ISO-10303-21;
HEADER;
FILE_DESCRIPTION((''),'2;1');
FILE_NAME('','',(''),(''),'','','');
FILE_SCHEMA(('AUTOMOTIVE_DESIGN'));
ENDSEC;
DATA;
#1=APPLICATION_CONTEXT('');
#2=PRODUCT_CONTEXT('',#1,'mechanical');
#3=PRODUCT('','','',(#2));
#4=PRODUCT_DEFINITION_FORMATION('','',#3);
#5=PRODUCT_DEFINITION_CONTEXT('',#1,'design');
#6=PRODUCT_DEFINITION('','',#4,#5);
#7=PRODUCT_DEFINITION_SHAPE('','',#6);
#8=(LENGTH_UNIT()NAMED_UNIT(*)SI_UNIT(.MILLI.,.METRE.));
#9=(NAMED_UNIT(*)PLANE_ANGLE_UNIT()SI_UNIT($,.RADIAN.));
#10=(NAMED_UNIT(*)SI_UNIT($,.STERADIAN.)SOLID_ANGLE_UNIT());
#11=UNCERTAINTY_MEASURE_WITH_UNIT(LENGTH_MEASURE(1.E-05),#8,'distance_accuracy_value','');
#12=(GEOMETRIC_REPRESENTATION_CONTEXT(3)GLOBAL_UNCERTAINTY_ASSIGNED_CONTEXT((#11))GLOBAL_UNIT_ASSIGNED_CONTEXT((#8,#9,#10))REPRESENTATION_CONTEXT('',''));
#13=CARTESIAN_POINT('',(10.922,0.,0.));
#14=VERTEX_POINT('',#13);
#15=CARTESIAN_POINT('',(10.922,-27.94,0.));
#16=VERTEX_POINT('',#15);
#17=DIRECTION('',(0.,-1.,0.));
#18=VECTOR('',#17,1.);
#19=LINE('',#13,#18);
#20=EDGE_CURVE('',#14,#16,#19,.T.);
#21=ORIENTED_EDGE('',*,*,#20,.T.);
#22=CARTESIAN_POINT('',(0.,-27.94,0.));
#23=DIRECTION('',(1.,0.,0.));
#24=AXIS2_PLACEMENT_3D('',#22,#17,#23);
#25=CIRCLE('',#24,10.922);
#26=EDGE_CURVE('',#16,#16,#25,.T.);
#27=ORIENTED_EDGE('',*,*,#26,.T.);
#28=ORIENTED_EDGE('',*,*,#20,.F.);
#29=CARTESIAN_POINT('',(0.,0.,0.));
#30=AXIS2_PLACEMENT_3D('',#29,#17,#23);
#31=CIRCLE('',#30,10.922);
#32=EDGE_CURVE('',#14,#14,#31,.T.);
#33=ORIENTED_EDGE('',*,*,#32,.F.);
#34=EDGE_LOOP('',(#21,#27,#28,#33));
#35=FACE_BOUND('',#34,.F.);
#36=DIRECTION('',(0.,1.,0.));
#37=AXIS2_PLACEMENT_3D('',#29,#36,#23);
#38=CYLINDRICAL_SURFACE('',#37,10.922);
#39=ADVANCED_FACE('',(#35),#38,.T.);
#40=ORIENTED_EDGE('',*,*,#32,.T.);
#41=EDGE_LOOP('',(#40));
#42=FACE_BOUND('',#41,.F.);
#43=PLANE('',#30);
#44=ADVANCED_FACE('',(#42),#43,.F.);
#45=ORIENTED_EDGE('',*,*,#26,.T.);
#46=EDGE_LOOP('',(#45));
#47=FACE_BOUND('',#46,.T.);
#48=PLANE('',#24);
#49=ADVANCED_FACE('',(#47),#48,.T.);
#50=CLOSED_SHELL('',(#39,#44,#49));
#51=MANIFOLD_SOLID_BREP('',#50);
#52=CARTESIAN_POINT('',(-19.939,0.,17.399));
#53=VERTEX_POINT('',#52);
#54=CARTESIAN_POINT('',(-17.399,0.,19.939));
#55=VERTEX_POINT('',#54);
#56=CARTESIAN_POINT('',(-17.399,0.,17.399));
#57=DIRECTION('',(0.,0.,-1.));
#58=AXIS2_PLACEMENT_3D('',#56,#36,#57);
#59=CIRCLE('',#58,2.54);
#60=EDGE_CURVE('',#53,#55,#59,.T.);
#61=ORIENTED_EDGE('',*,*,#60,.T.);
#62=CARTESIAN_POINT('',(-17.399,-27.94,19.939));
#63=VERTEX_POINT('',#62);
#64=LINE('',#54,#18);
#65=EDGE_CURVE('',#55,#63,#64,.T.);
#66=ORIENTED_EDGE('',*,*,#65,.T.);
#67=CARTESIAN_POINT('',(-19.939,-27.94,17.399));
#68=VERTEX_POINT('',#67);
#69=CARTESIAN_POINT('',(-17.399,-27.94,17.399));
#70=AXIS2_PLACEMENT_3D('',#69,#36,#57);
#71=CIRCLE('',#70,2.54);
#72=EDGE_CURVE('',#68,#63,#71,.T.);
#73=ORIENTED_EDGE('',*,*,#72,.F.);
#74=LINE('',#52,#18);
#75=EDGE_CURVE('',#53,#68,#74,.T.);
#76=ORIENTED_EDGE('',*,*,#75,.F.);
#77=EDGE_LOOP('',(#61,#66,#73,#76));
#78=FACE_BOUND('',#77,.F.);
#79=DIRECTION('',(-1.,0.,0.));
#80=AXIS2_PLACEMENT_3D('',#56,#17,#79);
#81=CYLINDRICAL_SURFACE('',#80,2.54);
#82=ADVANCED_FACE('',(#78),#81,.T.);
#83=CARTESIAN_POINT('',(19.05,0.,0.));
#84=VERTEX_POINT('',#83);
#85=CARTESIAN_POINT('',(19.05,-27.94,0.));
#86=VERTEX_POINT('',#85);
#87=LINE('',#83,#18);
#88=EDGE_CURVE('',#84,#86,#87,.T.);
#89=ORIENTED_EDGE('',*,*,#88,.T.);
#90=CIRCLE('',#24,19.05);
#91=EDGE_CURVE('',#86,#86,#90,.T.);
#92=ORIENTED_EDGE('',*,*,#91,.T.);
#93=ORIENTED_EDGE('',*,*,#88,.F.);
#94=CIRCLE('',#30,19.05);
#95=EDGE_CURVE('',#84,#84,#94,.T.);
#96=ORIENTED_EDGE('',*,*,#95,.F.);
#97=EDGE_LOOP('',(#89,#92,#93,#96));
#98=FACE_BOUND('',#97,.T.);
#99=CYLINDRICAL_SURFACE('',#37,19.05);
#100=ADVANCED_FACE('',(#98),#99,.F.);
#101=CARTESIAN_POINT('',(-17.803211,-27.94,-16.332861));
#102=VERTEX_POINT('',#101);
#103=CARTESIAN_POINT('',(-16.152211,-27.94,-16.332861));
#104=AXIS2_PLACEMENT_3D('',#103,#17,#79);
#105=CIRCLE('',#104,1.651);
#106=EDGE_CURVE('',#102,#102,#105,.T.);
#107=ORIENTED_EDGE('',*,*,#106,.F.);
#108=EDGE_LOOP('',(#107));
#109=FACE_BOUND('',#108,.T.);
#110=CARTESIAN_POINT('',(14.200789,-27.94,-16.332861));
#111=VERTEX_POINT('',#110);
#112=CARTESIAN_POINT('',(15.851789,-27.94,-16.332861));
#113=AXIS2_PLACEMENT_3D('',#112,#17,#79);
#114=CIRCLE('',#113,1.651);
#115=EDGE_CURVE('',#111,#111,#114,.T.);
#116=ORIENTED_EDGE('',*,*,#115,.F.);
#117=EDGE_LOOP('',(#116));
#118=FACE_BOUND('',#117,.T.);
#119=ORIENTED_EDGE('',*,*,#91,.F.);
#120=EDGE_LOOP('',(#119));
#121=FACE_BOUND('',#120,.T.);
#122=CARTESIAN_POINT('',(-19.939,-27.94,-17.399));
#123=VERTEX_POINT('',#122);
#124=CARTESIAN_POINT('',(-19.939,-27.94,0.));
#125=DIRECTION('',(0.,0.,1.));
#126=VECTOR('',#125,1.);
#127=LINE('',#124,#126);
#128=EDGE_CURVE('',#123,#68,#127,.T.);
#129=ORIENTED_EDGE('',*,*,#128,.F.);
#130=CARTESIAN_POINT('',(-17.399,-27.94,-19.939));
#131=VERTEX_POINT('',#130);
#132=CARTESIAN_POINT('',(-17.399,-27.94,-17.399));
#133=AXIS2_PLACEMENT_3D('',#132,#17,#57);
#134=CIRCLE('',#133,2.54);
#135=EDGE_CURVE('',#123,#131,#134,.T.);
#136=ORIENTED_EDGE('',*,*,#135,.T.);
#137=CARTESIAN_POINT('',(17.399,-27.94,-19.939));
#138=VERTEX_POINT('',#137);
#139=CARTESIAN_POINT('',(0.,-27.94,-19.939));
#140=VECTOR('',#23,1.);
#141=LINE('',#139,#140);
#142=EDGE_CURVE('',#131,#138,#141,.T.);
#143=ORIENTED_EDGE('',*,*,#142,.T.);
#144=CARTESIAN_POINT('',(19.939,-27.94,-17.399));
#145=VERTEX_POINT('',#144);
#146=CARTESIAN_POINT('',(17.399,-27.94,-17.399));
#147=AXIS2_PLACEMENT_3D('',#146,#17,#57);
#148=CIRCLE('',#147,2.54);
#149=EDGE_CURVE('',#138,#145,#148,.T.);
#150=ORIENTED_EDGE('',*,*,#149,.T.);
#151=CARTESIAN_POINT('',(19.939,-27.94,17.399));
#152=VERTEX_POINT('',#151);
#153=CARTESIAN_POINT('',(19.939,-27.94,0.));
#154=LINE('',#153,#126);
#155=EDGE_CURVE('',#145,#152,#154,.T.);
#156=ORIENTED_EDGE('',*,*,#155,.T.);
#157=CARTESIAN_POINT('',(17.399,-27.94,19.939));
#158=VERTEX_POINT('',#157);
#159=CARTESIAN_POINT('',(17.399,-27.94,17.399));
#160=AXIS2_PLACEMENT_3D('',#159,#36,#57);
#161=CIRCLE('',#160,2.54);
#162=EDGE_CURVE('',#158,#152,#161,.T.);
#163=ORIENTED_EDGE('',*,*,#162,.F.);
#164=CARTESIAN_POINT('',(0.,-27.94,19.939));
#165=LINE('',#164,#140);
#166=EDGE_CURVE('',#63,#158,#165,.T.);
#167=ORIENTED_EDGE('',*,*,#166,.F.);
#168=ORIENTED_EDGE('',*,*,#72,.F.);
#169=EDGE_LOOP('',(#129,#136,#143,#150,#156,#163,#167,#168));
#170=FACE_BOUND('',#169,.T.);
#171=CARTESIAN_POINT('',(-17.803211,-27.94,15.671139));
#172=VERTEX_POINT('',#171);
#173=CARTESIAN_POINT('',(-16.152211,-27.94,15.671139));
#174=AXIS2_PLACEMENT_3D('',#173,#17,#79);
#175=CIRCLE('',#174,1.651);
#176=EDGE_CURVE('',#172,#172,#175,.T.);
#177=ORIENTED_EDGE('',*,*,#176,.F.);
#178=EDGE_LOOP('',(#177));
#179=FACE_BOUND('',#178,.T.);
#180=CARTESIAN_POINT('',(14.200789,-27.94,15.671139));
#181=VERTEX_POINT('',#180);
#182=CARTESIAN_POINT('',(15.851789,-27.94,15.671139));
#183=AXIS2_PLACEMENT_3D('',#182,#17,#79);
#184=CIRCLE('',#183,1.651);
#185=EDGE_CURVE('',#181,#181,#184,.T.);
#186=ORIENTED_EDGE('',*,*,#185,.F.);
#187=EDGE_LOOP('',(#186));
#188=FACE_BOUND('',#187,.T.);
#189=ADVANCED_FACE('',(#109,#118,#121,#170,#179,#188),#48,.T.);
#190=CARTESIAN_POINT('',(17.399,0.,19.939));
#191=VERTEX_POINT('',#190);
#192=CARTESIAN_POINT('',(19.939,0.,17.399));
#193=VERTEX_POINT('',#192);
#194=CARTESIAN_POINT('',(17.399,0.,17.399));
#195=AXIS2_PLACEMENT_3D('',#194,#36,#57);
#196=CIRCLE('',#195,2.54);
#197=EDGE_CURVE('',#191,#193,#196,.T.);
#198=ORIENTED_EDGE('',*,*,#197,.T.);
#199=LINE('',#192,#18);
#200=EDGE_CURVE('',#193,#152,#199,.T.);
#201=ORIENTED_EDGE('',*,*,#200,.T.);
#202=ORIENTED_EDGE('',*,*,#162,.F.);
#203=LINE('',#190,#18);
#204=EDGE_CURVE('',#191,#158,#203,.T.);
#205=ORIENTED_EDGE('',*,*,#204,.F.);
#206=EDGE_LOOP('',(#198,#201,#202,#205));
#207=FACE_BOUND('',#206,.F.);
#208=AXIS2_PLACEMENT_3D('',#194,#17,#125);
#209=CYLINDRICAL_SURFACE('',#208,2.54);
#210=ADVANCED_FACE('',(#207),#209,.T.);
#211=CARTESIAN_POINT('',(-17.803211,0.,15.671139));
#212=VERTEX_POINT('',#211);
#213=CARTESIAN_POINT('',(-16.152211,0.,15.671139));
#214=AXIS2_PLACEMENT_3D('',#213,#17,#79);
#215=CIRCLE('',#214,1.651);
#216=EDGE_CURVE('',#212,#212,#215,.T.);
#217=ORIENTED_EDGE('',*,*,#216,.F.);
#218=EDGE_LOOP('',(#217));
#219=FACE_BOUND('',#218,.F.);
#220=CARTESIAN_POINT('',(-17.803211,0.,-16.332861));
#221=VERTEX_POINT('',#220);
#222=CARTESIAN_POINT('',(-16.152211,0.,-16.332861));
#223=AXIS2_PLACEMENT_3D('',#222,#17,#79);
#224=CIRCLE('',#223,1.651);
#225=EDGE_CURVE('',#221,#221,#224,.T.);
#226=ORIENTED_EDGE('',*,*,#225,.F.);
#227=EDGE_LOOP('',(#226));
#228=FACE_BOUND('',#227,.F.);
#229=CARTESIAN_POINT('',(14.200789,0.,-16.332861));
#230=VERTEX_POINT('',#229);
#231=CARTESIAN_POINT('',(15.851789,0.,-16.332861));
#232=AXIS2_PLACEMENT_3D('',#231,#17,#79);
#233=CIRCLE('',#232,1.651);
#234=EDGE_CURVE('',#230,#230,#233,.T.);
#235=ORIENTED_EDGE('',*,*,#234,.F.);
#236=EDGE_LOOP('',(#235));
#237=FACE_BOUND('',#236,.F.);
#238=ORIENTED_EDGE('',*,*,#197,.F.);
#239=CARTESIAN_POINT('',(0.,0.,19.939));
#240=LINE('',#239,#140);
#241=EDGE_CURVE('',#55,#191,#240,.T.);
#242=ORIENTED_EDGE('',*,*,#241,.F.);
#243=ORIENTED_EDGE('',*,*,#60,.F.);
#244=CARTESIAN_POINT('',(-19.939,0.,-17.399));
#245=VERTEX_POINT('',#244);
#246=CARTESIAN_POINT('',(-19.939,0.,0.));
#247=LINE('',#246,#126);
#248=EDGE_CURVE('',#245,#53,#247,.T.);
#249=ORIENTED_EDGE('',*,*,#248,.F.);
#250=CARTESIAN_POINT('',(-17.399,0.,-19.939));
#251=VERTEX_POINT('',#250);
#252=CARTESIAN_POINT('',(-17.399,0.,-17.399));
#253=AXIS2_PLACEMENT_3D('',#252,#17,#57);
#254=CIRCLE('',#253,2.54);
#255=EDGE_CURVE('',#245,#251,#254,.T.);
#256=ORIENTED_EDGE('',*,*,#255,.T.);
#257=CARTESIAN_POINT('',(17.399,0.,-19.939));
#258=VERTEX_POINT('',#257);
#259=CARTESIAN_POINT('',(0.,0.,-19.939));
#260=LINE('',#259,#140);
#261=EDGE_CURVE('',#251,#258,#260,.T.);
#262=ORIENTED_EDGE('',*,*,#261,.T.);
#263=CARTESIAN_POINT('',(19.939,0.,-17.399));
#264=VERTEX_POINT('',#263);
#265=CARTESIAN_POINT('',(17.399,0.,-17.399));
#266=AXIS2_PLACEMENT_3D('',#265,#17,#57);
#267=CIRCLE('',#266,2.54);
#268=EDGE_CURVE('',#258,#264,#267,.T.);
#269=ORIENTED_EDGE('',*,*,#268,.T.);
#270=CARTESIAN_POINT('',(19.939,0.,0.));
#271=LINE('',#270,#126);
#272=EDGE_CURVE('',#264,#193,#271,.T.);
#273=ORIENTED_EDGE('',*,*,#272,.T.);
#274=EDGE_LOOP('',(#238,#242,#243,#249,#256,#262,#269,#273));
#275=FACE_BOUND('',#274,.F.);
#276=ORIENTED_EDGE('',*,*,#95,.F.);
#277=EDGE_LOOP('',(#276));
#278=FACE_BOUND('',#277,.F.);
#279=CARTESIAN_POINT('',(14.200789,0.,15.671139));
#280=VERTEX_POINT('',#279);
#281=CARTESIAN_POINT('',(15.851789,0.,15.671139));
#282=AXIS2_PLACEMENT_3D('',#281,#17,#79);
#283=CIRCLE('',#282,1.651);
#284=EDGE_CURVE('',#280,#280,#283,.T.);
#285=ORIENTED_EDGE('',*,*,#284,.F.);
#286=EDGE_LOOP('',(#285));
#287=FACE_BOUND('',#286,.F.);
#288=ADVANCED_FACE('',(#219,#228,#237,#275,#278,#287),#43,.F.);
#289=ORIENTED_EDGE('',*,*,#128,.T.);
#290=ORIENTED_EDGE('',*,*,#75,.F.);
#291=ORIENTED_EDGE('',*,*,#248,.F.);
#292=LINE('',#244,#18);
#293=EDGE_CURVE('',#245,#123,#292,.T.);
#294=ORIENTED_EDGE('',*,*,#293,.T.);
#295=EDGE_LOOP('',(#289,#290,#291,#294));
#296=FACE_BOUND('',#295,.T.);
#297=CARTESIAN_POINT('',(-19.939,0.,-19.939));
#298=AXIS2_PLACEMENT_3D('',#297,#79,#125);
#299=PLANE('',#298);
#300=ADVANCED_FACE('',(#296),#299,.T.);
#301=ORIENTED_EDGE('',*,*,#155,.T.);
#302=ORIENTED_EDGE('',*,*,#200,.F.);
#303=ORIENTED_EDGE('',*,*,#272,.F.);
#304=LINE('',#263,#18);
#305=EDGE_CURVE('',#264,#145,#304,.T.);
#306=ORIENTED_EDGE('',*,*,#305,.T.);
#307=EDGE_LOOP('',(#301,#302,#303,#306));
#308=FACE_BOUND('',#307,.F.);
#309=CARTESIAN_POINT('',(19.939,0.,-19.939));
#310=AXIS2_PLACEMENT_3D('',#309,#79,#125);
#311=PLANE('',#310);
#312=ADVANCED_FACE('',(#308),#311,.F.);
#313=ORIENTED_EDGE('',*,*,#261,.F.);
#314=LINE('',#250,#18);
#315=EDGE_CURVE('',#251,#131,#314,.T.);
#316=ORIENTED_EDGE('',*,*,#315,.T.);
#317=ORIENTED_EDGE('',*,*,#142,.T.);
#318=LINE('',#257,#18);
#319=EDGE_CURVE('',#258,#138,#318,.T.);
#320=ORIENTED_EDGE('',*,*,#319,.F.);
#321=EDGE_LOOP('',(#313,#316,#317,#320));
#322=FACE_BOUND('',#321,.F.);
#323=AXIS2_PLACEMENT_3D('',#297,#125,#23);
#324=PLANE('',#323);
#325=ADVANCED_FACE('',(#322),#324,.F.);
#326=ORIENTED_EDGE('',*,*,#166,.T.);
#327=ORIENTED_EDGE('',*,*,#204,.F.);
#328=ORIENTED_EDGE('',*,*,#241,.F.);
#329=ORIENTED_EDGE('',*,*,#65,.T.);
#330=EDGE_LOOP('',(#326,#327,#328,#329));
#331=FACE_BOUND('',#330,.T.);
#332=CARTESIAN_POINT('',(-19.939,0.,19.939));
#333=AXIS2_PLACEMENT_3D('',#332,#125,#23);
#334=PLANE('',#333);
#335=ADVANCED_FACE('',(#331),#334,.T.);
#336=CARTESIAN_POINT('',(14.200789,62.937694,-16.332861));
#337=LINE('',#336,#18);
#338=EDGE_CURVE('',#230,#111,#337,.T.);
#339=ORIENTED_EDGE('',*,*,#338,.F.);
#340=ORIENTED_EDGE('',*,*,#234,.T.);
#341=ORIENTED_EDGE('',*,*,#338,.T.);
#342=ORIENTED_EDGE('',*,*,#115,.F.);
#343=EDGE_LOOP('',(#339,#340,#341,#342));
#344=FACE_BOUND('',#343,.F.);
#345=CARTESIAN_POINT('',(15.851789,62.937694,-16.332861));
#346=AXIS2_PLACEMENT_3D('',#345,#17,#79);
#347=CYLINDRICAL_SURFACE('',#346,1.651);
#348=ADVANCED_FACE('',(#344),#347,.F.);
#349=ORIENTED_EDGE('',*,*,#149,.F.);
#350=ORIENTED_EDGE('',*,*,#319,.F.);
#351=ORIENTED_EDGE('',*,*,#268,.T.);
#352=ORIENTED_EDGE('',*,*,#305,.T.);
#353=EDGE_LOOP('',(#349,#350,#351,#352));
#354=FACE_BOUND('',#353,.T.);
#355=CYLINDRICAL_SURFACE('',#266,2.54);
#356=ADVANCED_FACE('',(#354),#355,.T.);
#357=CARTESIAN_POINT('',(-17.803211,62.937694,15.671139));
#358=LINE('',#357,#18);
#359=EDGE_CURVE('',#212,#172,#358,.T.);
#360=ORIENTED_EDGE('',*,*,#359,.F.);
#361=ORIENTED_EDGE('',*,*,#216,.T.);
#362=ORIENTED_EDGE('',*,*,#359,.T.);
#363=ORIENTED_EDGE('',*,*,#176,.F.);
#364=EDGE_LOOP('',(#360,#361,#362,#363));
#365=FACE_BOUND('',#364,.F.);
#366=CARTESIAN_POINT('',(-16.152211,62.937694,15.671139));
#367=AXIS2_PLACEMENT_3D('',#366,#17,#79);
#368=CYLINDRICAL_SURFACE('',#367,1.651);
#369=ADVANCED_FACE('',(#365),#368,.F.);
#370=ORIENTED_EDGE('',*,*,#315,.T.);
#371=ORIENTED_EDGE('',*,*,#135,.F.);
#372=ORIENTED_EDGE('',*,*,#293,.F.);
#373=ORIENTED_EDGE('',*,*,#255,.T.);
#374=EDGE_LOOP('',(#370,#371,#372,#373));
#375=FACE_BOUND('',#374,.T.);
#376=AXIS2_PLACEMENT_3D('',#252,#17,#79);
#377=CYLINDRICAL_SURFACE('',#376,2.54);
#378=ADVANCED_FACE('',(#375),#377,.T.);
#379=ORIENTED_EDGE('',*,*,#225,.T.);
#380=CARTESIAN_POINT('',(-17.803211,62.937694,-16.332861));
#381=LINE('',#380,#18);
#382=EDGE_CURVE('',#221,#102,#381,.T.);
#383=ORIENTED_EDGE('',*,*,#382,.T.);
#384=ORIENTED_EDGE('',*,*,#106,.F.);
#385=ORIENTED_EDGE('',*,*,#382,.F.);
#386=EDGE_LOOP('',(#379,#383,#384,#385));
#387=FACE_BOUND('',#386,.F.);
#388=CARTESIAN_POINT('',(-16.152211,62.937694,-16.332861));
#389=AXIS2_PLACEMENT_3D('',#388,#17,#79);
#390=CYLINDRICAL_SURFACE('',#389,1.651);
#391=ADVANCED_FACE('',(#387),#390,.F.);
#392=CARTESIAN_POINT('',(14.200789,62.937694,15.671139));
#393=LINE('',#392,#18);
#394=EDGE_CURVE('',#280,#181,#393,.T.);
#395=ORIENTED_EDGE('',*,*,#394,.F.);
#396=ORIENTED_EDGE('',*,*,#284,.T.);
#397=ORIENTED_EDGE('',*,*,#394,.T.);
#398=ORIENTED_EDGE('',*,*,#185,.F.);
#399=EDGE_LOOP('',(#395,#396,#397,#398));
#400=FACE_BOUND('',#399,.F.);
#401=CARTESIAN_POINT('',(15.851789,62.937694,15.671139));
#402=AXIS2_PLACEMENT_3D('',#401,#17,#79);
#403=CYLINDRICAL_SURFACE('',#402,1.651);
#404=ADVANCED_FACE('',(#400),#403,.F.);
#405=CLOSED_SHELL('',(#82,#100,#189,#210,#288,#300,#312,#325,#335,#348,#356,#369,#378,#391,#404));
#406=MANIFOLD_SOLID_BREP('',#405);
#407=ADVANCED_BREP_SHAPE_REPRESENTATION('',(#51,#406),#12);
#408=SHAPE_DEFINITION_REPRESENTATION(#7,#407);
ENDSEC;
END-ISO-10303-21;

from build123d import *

# Parameters (mm, degrees)
F0_W     = 39.878
F0_H     = 39.878
F0_R     = 19.05
F2_DEPTH = 27.94
F0_R_2   = 10.922
F3_D     = 3.302
F4_R     = 2.54


# Not quite as in the source:
# - a feature names something its author has since deleted; it is built from what else it names


with BuildPart() as f2:
    # F0 (on Front) → F2 (new body)
    with BuildSketch(Plane.XZ):
        Rectangle(F0_W, F0_H)
        Circle(F0_R, mode=Mode.SUBTRACT)
    extrude(amount=F2_DEPTH)

    # F3 (through all)
    with Locations(Plane(origin=(0, 0, 0), x_dir=(1, 0, 0), z_dir=(0, 1, 0))):
        with Locations((15.8517888446, 16.3328610361), (15.8517888446, -15.6711389639), (-16.1522111554, 16.3328610361), (-16.1522111554, -15.6711389639)):
            Hole(F3_D / 2)

    # F4
    f4_edges = [f2.edges().sort_by_distance(p)[0] for p in [
        (19.939, -13.97, 19.939),
        (-19.939, -13.97, 19.939),
        (-19.939, -13.97, -19.939),
        (19.939, -13.97, -19.939),
    ]]
    fillet(f4_edges, radius=F4_R)


with BuildPart() as f2b:
    # F0 (on Front) → F2, piece 2 (new body)
    with BuildSketch(Plane.XZ):
        Circle(F0_R_2)
    extrude(amount=F2_DEPTH)


solid = Compound([f2.part, f2b.part])
